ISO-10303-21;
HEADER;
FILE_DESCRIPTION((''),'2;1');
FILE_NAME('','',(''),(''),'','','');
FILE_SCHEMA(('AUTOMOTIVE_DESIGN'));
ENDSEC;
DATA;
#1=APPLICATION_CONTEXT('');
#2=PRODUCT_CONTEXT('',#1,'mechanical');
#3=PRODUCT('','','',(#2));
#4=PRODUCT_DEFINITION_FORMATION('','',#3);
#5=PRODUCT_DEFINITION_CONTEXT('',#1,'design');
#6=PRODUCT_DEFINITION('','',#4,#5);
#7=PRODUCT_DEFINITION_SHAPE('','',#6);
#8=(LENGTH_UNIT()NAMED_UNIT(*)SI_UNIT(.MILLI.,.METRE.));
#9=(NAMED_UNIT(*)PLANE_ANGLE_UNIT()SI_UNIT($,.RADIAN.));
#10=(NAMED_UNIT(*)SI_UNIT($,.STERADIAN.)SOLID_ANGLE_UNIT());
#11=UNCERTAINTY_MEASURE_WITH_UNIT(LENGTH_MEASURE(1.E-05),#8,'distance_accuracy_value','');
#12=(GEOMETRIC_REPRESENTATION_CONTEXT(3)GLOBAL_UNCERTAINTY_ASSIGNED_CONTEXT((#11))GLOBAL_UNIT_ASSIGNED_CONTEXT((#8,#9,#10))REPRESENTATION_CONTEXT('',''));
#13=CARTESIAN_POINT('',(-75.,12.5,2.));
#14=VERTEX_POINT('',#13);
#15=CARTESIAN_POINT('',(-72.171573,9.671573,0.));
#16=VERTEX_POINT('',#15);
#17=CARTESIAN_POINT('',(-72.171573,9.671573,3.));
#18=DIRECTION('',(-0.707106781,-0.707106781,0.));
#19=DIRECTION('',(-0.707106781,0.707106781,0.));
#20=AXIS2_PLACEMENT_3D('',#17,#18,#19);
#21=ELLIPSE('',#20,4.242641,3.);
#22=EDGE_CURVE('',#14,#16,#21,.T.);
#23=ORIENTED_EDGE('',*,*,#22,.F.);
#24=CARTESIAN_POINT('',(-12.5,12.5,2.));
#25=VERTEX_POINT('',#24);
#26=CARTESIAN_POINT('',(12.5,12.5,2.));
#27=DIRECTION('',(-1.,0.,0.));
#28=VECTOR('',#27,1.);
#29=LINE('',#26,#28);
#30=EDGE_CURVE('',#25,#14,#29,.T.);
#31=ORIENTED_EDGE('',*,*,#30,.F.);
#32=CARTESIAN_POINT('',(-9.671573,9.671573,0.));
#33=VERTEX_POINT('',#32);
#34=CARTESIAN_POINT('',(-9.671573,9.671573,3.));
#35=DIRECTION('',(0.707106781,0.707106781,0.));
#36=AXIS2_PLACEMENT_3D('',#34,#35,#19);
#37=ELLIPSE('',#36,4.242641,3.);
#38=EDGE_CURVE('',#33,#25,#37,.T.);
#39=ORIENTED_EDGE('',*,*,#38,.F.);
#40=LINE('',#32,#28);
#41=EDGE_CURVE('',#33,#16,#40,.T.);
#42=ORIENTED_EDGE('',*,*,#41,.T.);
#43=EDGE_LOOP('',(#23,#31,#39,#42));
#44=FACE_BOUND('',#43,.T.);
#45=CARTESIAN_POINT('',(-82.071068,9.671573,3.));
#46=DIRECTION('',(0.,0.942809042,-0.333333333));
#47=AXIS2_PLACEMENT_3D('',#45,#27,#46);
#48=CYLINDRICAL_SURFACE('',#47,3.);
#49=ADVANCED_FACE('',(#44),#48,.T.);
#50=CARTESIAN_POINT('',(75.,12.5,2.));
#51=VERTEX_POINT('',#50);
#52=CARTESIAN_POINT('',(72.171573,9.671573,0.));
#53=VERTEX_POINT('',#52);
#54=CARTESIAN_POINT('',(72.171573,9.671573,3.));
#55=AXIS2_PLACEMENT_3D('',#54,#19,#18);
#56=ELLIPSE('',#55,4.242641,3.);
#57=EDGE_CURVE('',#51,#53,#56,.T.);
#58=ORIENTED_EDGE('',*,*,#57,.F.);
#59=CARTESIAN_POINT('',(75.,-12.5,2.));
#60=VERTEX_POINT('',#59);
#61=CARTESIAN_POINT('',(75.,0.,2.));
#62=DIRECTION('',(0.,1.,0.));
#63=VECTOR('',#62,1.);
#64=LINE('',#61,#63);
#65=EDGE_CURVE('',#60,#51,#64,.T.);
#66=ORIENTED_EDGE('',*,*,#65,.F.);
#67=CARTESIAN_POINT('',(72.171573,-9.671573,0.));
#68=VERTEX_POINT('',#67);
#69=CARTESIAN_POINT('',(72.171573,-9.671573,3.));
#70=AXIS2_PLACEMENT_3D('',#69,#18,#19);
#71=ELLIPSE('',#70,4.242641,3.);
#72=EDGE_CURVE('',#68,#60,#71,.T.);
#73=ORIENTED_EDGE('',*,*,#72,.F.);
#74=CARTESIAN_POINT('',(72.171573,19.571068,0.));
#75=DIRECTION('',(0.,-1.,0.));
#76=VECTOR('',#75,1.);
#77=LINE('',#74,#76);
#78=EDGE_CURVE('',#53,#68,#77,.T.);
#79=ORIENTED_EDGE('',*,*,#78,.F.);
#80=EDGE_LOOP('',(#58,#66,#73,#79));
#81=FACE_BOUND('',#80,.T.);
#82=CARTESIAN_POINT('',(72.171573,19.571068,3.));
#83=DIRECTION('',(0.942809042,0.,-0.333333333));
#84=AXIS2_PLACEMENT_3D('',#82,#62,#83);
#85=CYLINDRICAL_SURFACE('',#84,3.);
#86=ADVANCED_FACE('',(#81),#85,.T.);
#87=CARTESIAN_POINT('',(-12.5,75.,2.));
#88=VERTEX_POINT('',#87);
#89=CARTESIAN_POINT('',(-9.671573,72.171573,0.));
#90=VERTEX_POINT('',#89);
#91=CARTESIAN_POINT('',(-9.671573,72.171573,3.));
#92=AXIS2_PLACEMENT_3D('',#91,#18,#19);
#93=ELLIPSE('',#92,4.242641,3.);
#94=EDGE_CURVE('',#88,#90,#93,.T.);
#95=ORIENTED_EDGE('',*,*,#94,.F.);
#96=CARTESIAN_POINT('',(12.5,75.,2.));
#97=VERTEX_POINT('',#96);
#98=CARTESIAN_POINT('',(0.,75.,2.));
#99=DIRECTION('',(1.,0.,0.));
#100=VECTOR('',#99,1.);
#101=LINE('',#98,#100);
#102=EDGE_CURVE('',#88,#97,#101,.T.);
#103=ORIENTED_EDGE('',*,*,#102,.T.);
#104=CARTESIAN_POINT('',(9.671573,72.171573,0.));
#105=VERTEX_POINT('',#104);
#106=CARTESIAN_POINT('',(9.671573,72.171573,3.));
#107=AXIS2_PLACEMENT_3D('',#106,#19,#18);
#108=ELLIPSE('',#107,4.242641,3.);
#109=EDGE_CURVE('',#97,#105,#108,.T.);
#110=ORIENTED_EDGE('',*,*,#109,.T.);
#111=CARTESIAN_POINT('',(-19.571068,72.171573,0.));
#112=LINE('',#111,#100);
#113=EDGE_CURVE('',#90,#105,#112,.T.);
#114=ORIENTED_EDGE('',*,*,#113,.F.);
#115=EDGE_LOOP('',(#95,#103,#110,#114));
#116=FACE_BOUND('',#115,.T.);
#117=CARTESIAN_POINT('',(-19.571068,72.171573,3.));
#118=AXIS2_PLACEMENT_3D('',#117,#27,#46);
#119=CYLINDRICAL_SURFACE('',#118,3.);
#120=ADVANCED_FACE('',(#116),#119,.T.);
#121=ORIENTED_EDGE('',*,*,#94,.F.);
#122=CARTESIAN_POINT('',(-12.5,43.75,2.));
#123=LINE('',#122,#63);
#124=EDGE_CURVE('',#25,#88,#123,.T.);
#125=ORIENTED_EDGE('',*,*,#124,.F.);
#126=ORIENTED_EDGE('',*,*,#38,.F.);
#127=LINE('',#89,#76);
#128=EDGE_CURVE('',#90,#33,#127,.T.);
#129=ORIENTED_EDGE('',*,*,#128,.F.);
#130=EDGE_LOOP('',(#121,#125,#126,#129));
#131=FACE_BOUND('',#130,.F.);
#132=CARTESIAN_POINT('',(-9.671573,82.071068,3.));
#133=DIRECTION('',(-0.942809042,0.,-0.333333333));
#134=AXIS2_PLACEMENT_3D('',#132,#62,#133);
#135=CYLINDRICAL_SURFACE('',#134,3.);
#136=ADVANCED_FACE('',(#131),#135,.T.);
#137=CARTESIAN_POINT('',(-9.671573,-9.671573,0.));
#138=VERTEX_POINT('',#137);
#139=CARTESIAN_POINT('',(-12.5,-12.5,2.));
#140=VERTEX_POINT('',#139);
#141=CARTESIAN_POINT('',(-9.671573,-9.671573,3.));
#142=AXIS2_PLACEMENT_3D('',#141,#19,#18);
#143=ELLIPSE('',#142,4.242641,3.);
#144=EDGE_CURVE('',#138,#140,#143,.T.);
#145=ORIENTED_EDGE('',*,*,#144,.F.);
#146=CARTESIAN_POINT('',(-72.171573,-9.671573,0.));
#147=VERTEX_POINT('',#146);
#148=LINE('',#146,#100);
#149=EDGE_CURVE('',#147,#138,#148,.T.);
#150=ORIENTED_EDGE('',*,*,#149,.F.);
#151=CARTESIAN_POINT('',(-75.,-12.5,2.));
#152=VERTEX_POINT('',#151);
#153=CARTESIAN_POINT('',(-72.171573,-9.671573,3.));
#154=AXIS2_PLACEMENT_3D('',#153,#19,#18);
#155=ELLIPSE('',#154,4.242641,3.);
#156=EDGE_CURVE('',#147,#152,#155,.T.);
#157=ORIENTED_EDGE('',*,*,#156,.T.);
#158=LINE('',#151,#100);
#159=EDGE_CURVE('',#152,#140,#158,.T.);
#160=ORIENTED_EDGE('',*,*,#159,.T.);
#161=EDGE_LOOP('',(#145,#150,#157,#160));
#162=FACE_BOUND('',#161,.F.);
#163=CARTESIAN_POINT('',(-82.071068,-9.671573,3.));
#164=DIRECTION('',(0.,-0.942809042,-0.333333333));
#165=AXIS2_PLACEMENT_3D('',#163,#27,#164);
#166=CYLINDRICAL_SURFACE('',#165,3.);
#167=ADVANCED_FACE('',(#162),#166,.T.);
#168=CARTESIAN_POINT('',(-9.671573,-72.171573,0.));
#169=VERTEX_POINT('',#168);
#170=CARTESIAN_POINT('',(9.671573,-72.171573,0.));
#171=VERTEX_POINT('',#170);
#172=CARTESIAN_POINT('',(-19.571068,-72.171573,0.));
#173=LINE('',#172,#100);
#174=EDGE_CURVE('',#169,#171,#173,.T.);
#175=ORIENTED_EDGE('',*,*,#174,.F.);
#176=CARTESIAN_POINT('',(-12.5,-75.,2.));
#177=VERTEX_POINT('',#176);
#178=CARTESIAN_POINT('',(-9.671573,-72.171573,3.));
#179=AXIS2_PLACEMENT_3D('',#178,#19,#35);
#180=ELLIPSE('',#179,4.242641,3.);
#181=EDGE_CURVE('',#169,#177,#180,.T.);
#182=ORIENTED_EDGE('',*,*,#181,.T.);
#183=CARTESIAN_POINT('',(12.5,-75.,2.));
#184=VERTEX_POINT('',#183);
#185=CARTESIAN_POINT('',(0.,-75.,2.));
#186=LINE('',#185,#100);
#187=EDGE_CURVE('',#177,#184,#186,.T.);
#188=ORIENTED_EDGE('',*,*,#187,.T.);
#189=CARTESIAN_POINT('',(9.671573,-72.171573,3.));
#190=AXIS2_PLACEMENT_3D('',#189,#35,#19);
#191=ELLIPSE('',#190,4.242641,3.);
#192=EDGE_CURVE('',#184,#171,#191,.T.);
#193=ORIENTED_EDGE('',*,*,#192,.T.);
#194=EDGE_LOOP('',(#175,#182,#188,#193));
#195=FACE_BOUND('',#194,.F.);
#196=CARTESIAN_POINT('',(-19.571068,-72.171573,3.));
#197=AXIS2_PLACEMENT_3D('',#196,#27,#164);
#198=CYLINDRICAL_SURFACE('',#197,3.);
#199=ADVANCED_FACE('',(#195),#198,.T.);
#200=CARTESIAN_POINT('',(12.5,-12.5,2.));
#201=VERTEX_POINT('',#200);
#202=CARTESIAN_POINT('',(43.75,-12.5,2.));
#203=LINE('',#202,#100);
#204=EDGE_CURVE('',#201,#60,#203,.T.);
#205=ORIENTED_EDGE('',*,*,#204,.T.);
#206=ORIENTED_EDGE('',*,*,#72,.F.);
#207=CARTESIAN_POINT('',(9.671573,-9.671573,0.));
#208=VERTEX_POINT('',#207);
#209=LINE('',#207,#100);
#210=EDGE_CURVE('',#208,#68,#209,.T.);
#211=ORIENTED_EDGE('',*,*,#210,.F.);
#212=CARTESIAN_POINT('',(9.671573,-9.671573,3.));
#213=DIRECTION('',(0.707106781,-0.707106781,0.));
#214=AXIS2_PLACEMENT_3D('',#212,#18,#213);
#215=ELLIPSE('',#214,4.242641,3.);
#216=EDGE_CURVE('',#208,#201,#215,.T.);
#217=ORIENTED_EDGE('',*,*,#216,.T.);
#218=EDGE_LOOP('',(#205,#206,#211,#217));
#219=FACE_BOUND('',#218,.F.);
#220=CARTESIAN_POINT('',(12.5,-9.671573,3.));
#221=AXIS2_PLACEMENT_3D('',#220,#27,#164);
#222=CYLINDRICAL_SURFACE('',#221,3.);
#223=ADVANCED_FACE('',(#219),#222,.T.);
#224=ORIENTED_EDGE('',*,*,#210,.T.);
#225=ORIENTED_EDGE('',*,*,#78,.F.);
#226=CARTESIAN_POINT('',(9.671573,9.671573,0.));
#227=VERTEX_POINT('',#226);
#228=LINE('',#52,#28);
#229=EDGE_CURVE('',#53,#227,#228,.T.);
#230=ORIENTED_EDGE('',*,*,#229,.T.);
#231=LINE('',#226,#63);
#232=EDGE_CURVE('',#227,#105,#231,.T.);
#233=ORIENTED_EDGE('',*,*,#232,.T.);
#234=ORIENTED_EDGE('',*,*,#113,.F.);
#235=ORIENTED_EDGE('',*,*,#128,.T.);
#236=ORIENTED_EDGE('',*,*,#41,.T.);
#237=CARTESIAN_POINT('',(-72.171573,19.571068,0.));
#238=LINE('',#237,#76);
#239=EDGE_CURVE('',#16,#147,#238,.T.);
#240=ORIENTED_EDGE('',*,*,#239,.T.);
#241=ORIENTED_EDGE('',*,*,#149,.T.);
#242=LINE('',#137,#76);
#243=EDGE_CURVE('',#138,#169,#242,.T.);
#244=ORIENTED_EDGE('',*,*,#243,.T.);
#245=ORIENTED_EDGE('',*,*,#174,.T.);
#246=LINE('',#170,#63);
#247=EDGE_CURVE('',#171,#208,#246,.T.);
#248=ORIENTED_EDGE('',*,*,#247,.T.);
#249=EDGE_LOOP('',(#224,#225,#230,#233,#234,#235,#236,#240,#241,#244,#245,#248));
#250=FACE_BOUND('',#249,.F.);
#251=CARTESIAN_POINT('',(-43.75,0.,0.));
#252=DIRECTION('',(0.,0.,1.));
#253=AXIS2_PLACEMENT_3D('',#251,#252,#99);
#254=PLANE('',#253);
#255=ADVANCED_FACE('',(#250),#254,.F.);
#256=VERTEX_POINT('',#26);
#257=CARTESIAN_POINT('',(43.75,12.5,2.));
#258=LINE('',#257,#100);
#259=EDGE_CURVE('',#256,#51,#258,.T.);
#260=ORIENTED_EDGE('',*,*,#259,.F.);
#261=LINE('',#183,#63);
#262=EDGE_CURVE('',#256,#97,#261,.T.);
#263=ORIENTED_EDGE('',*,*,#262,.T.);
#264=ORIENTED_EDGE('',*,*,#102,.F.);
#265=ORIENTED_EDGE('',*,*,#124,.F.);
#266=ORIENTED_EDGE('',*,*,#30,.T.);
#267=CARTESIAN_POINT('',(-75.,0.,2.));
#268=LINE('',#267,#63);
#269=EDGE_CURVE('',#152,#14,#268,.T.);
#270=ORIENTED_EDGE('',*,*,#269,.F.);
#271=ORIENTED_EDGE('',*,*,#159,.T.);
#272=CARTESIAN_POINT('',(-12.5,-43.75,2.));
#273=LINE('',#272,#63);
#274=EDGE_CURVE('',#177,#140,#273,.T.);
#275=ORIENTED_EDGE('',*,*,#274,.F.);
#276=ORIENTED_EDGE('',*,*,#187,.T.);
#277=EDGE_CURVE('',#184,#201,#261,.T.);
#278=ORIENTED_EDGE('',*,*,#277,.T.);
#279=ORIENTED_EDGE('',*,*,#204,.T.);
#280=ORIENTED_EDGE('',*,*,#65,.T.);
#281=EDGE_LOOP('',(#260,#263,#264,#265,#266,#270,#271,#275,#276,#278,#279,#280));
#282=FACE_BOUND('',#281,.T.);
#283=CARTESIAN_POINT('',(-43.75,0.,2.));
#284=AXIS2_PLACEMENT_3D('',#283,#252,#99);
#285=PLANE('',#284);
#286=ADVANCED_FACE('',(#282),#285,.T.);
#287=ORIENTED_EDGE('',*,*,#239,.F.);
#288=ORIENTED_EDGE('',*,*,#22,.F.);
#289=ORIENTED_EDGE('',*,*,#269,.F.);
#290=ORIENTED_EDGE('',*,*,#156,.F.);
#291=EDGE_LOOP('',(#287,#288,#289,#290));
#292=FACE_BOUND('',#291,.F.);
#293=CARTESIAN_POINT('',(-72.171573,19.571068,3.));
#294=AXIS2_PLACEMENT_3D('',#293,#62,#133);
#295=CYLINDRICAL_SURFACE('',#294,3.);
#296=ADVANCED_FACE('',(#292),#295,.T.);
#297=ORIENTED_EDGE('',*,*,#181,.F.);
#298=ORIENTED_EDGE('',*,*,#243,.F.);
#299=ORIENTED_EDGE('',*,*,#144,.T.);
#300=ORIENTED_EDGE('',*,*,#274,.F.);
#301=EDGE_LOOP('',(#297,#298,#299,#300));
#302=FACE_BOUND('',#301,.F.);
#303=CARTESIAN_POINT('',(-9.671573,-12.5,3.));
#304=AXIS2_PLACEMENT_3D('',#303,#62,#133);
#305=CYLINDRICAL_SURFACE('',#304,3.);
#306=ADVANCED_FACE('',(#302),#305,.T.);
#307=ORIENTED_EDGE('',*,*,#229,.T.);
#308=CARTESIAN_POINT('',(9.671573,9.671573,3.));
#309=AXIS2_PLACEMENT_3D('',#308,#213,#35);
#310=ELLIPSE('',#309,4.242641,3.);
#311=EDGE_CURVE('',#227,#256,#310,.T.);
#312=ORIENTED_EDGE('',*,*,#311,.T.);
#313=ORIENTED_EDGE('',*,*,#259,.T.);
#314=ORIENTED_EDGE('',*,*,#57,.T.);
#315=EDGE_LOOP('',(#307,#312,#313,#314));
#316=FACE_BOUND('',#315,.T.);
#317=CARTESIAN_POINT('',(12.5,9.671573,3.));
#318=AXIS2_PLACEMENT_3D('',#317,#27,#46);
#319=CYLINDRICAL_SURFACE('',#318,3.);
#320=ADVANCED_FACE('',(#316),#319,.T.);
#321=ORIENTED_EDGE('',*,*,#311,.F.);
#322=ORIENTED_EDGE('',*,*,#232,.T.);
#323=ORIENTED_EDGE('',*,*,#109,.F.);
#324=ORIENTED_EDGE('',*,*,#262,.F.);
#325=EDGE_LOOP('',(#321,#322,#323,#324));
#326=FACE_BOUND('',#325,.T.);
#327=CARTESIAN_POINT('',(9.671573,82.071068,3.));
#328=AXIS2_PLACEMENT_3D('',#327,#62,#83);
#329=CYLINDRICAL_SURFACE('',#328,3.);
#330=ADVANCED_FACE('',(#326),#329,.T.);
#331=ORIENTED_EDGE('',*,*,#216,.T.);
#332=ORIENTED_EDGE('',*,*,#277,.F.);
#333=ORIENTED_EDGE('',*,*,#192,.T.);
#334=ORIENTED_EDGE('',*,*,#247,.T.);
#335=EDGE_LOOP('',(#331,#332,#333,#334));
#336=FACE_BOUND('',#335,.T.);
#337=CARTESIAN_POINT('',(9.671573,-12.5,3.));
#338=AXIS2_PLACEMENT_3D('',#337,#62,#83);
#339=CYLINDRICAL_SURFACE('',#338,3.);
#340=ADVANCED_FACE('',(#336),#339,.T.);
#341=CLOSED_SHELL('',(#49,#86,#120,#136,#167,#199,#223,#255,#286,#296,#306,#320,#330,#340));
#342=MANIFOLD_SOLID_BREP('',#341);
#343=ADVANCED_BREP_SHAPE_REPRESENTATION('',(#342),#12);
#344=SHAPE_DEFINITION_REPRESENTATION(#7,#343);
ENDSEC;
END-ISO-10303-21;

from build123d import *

# Parameters (mm, degrees)
F0_W         = 62.5
F0_H         = 25
F0_W_2       = 25
F0_H_2       = 62.5
F1_DEPTH     = 2
F2_T1_DEPTH  = 69.5710678119
F2_T3_DEPTH  = 69.5710678119
F2_T5_DEPTH  = 39.1421356237
F2_T7_DEPTH  = 69.5710678119
F2_T9_DEPTH  = 39.1421356237
F2_T11_DEPTH = 69.5710678119
F2_T17_DEPTH = 69.5710678119
F2_T21_DEPTH = 69.5710678119
F2_T28_DEPTH = 69.5710678119
F2_T32_DEPTH = 69.5710678119
F2_T39_DEPTH = 69.5710678119
F2_T43_DEPTH = 69.5710678119
F2_T50_DEPTH = 69.5710678119
F2_T54_DEPTH = 69.5710678119


# Not quite as in the source:
# - a fillet or chamfer that OpenCascade refuses, or shapes differently, is made with other operations: its cross-section is extruded or revolved along the edge and cut away or added
# - a feature names something its author has since deleted; it is built from what else it names


with BuildPart() as f1:
    # F0 (on Top) → F1 (new body)
    with BuildSketch(Plane.XY):
        with Locations((-43.75, 0)):
            Rectangle(F0_W, F0_H)
        Rectangle(F0_W_2, F0_H)
        with Locations((0, -43.75)):
            Rectangle(F0_W_2, F0_H_2)
        with Locations((0, 43.75)):
            Rectangle(F0_W_2, F0_H_2)
        with Locations((43.75, 0)):
            Rectangle(F0_W, F0_H)
    extrude(amount=F1_DEPTH)

    # F2: fillet of radius 3 on 12 edges, made by hand

    # F2_s2 → F2_t1 (cut)
    with BuildSketch(Plane.YZ.offset(-82.0710678119)):
        with BuildLine():
            ThreePointArc((-12.5, 2), (-11.4036236828, 0.5505102572), (-9.6715728753, 0))
            Line((-9.6715728753, 0), (-12.5, 0))
            Line((-12.5, 0), (-12.5, 2))
        make_face()
        with BuildLine():
            ThreePointArc((12.5, 2), (11.4036236828, 0.5505102572), (9.6715728753, 0))
            Line((9.6715728753, 0), (12.5, 0))
            Line((12.5, 0), (12.5, 2))
        make_face()
    extrude(amount=F2_T1_DEPTH, mode=Mode.SUBTRACT)

    # F2_s4 → F2_t3 (cut)
    with BuildSketch(Plane.XZ.offset(12.5)):
        with BuildLine():
            ThreePointArc((-12.5, 2), (-11.4036236828, 0.5505102572), (-9.6715728753, 0))
            Line((-9.6715728753, 0), (-12.5, 0))
            Line((-12.5, 0), (-12.5, 2))
        make_face()
        with BuildLine():
            ThreePointArc((12.5, 2), (11.4036236828, 0.5505102572), (9.6715728753, 0))
            Line((9.6715728753, 0), (12.5, 0))
            Line((12.5, 0), (12.5, 2))
        make_face()
    extrude(amount=F2_T3_DEPTH, mode=Mode.SUBTRACT)

    # F2_s6 → F2_t5 (cut)
    with BuildSketch(Plane.YZ.offset(-19.5710678119)):
        with BuildLine():
            ThreePointArc((-75, 2), (-73.9036236828, 0.5505102572), (-72.1715728753, 0))
            Line((-72.1715728753, 0), (-75, 0))
            Line((-75, 0), (-75, 2))
        make_face()
        with BuildLine():
            ThreePointArc((75, 2), (73.9036236828, 0.5505102572), (72.1715728753, 0))
            Line((72.1715728753, 0), (75, 0))
            Line((75, 0), (75, 2))
        make_face()
    extrude(amount=F2_T5_DEPTH, mode=Mode.SUBTRACT)

    # F2_s8 → F2_t7 (cut)
    with BuildSketch(Plane.YZ.offset(12.5)):
        with BuildLine():
            ThreePointArc((-12.5, 2), (-11.4036236828, 0.5505102572), (-9.6715728753, 0))
            Line((-9.6715728753, 0), (-12.5, 0))
            Line((-12.5, 0), (-12.5, 2))
        make_face()
        with BuildLine():
            ThreePointArc((12.5, 2), (11.4036236828, 0.5505102572), (9.6715728753, 0))
            Line((9.6715728753, 0), (12.5, 0))
            Line((12.5, 0), (12.5, 2))
        make_face()
    extrude(amount=F2_T7_DEPTH, mode=Mode.SUBTRACT)

    # F2_s10 → F2_t9 (cut)
    with BuildSketch(Plane.XZ.offset(-19.5710678119)):
        with BuildLine():
            ThreePointArc((75, 2), (73.9036236828, 0.5505102572), (72.1715728753, 0))
            Line((72.1715728753, 0), (75, 0))
            Line((75, 0), (75, 2))
        make_face()
        with BuildLine():
            ThreePointArc((-75, 2), (-73.9036236828, 0.5505102572), (-72.1715728753, 0))
            Line((-72.1715728753, 0), (-75, 0))
            Line((-75, 0), (-75, 2))
        make_face()
    extrude(amount=F2_T9_DEPTH, mode=Mode.SUBTRACT)

    # F2_s12 → F2_t11 (cut)
    with BuildSketch(Plane.XZ.offset(-82.0710678119)):
        with BuildLine():
            ThreePointArc((12.5, 2), (11.4036236828, 0.5505102572), (9.6715728753, 0))
            Line((9.6715728753, 0), (12.5, 0))
            Line((12.5, 0), (12.5, 2))
        make_face()
        with BuildLine():
            ThreePointArc((-12.5, 2), (-11.4036236828, 0.5505102572), (-9.6715728753, 0))
            Line((-9.6715728753, 0), (-12.5, 0))
            Line((-12.5, 0), (-12.5, 2))
        make_face()
    extrude(amount=F2_T11_DEPTH, mode=Mode.SUBTRACT)


with BuildPart() as f2_tool15:
    # F2_s16 → F2_t17 (new body)
    with BuildSketch(Plane.YZ.offset(-75)):
        with BuildLine():
            ThreePointArc((-12.5, 2), (-11.4036236828, 0.5505102572), (-9.6715728753, 0))
            Line((-9.6715728753, 0), (-12.5, 0))
            Line((-12.5, 0), (-12.5, 2))
        make_face()
    extrude(amount=F2_T17_DEPTH)

    split(bisect_by=Plane.YZ.offset(-12.5), keep=Keep.TOP)


with BuildPart() as f2_tool19:
    # F2_s20 → F2_t21 (new body)
    with BuildSketch(Plane.XZ.offset(5.4289321881)):
        with BuildLine():
            ThreePointArc((-12.5, 2), (-11.4036236828, 0.5505102572), (-9.6715728753, 0))
            Line((-9.6715728753, 0), (-12.5, 0))
            Line((-12.5, 0), (-12.5, 2))
        make_face()
    extrude(amount=F2_T21_DEPTH)

    split(bisect_by=Plane.XZ.offset(12.5), keep=Keep.BOTTOM)


with BuildPart() as f2_tool15_1:
    add(f2_tool15.part)

    # F2_t23: intersect F2_tool19
    add(f2_tool19.part, mode=Mode.INTERSECT)


with BuildPart() as f1_1:
    add(f1.part)

    # F2_t13: cut F2_tool15
    add(f2_tool15_1.part, mode=Mode.SUBTRACT)


with BuildPart() as f2_tool26:
    # F2_s27 → F2_t28 (new body)
    with BuildSketch(Plane.XZ.offset(75)):
        with BuildLine():
            ThreePointArc((12.5, 2), (11.4036236828, 0.5505102572), (9.6715728753, 0))
            Line((9.6715728753, 0), (12.5, 0))
            Line((12.5, 0), (12.5, 2))
        make_face()
    extrude(amount=-F2_T28_DEPTH)

    split(bisect_by=Plane.XZ.offset(12.5), keep=Keep.BOTTOM)


with BuildPart() as f2_tool30:
    # F2_s31 → F2_t32 (new body)
    with BuildSketch(Plane.YZ.offset(5.4289321881)):
        with BuildLine():
            ThreePointArc((-12.5, 2), (-11.4036236828, 0.5505102572), (-9.6715728753, 0))
            Line((-9.6715728753, 0), (-12.5, 0))
            Line((-12.5, 0), (-12.5, 2))
        make_face()
    extrude(amount=F2_T32_DEPTH)

    split(bisect_by=Plane.YZ.offset(12.5), keep=Keep.BOTTOM)


with BuildPart() as f2_tool26_1:
    add(f2_tool26.part)

    # F2_t34: intersect F2_tool30
    add(f2_tool30.part, mode=Mode.INTERSECT)


with BuildPart() as f1_2:
    add(f1_1.part)

    # F2_t24: cut F2_tool26
    add(f2_tool26_1.part, mode=Mode.SUBTRACT)


with BuildPart() as f2_tool37:
    # F2_s38 → F2_t39 (new body)
    with BuildSketch(Plane.YZ.offset(75)):
        with BuildLine():
            ThreePointArc((12.5, 2), (11.4036236828, 0.5505102572), (9.6715728753, 0))
            Line((9.6715728753, 0), (12.5, 0))
            Line((12.5, 0), (12.5, 2))
        make_face()
    extrude(amount=-F2_T39_DEPTH)

    split(bisect_by=Plane.YZ.offset(12.5), keep=Keep.BOTTOM)


with BuildPart() as f2_tool41:
    # F2_s42 → F2_t43 (new body)
    with BuildSketch(Plane.XZ.offset(-5.4289321881)):
        with BuildLine():
            ThreePointArc((12.5, 2), (11.4036236828, 0.5505102572), (9.6715728753, 0))
            Line((9.6715728753, 0), (12.5, 0))
            Line((12.5, 0), (12.5, 2))
        make_face()
    extrude(amount=-F2_T43_DEPTH)

    split(bisect_by=Plane.XZ.offset(-12.5), keep=Keep.TOP)


with BuildPart() as f2_tool37_1:
    add(f2_tool37.part)

    # F2_t45: intersect F2_tool41
    add(f2_tool41.part, mode=Mode.INTERSECT)


with BuildPart() as f1_3:
    add(f1_2.part)

    # F2_t35: cut F2_tool37
    add(f2_tool37_1.part, mode=Mode.SUBTRACT)


with BuildPart() as f2_tool48:
    # F2_s49 → F2_t50 (new body)
    with BuildSketch(Plane.XZ.offset(-75)):
        with BuildLine():
            ThreePointArc((-12.5, 2), (-11.4036236828, 0.5505102572), (-9.6715728753, 0))
            Line((-9.6715728753, 0), (-12.5, 0))
            Line((-12.5, 0), (-12.5, 2))
        make_face()
    extrude(amount=F2_T50_DEPTH)

    split(bisect_by=Plane.XZ.offset(-12.5), keep=Keep.TOP)


with BuildPart() as f2_tool52:
    # F2_s53 → F2_t54 (new body)
    with BuildSketch(Plane.YZ.offset(-5.4289321881)):
        with BuildLine():
            ThreePointArc((12.5, 2), (11.4036236828, 0.5505102572), (9.6715728753, 0))
            Line((9.6715728753, 0), (12.5, 0))
            Line((12.5, 0), (12.5, 2))
        make_face()
    extrude(amount=-F2_T54_DEPTH)

    split(bisect_by=Plane.YZ.offset(-12.5), keep=Keep.TOP)


with BuildPart() as f2_tool48_1:
    add(f2_tool48.part)

    # F2_t56: intersect F2_tool52
    add(f2_tool52.part, mode=Mode.INTERSECT)


with BuildPart() as f1_4:
    add(f1_3.part)

    # F2_t46: cut F2_tool48
    add(f2_tool48_1.part, mode=Mode.SUBTRACT)


solid = f1_4.part
